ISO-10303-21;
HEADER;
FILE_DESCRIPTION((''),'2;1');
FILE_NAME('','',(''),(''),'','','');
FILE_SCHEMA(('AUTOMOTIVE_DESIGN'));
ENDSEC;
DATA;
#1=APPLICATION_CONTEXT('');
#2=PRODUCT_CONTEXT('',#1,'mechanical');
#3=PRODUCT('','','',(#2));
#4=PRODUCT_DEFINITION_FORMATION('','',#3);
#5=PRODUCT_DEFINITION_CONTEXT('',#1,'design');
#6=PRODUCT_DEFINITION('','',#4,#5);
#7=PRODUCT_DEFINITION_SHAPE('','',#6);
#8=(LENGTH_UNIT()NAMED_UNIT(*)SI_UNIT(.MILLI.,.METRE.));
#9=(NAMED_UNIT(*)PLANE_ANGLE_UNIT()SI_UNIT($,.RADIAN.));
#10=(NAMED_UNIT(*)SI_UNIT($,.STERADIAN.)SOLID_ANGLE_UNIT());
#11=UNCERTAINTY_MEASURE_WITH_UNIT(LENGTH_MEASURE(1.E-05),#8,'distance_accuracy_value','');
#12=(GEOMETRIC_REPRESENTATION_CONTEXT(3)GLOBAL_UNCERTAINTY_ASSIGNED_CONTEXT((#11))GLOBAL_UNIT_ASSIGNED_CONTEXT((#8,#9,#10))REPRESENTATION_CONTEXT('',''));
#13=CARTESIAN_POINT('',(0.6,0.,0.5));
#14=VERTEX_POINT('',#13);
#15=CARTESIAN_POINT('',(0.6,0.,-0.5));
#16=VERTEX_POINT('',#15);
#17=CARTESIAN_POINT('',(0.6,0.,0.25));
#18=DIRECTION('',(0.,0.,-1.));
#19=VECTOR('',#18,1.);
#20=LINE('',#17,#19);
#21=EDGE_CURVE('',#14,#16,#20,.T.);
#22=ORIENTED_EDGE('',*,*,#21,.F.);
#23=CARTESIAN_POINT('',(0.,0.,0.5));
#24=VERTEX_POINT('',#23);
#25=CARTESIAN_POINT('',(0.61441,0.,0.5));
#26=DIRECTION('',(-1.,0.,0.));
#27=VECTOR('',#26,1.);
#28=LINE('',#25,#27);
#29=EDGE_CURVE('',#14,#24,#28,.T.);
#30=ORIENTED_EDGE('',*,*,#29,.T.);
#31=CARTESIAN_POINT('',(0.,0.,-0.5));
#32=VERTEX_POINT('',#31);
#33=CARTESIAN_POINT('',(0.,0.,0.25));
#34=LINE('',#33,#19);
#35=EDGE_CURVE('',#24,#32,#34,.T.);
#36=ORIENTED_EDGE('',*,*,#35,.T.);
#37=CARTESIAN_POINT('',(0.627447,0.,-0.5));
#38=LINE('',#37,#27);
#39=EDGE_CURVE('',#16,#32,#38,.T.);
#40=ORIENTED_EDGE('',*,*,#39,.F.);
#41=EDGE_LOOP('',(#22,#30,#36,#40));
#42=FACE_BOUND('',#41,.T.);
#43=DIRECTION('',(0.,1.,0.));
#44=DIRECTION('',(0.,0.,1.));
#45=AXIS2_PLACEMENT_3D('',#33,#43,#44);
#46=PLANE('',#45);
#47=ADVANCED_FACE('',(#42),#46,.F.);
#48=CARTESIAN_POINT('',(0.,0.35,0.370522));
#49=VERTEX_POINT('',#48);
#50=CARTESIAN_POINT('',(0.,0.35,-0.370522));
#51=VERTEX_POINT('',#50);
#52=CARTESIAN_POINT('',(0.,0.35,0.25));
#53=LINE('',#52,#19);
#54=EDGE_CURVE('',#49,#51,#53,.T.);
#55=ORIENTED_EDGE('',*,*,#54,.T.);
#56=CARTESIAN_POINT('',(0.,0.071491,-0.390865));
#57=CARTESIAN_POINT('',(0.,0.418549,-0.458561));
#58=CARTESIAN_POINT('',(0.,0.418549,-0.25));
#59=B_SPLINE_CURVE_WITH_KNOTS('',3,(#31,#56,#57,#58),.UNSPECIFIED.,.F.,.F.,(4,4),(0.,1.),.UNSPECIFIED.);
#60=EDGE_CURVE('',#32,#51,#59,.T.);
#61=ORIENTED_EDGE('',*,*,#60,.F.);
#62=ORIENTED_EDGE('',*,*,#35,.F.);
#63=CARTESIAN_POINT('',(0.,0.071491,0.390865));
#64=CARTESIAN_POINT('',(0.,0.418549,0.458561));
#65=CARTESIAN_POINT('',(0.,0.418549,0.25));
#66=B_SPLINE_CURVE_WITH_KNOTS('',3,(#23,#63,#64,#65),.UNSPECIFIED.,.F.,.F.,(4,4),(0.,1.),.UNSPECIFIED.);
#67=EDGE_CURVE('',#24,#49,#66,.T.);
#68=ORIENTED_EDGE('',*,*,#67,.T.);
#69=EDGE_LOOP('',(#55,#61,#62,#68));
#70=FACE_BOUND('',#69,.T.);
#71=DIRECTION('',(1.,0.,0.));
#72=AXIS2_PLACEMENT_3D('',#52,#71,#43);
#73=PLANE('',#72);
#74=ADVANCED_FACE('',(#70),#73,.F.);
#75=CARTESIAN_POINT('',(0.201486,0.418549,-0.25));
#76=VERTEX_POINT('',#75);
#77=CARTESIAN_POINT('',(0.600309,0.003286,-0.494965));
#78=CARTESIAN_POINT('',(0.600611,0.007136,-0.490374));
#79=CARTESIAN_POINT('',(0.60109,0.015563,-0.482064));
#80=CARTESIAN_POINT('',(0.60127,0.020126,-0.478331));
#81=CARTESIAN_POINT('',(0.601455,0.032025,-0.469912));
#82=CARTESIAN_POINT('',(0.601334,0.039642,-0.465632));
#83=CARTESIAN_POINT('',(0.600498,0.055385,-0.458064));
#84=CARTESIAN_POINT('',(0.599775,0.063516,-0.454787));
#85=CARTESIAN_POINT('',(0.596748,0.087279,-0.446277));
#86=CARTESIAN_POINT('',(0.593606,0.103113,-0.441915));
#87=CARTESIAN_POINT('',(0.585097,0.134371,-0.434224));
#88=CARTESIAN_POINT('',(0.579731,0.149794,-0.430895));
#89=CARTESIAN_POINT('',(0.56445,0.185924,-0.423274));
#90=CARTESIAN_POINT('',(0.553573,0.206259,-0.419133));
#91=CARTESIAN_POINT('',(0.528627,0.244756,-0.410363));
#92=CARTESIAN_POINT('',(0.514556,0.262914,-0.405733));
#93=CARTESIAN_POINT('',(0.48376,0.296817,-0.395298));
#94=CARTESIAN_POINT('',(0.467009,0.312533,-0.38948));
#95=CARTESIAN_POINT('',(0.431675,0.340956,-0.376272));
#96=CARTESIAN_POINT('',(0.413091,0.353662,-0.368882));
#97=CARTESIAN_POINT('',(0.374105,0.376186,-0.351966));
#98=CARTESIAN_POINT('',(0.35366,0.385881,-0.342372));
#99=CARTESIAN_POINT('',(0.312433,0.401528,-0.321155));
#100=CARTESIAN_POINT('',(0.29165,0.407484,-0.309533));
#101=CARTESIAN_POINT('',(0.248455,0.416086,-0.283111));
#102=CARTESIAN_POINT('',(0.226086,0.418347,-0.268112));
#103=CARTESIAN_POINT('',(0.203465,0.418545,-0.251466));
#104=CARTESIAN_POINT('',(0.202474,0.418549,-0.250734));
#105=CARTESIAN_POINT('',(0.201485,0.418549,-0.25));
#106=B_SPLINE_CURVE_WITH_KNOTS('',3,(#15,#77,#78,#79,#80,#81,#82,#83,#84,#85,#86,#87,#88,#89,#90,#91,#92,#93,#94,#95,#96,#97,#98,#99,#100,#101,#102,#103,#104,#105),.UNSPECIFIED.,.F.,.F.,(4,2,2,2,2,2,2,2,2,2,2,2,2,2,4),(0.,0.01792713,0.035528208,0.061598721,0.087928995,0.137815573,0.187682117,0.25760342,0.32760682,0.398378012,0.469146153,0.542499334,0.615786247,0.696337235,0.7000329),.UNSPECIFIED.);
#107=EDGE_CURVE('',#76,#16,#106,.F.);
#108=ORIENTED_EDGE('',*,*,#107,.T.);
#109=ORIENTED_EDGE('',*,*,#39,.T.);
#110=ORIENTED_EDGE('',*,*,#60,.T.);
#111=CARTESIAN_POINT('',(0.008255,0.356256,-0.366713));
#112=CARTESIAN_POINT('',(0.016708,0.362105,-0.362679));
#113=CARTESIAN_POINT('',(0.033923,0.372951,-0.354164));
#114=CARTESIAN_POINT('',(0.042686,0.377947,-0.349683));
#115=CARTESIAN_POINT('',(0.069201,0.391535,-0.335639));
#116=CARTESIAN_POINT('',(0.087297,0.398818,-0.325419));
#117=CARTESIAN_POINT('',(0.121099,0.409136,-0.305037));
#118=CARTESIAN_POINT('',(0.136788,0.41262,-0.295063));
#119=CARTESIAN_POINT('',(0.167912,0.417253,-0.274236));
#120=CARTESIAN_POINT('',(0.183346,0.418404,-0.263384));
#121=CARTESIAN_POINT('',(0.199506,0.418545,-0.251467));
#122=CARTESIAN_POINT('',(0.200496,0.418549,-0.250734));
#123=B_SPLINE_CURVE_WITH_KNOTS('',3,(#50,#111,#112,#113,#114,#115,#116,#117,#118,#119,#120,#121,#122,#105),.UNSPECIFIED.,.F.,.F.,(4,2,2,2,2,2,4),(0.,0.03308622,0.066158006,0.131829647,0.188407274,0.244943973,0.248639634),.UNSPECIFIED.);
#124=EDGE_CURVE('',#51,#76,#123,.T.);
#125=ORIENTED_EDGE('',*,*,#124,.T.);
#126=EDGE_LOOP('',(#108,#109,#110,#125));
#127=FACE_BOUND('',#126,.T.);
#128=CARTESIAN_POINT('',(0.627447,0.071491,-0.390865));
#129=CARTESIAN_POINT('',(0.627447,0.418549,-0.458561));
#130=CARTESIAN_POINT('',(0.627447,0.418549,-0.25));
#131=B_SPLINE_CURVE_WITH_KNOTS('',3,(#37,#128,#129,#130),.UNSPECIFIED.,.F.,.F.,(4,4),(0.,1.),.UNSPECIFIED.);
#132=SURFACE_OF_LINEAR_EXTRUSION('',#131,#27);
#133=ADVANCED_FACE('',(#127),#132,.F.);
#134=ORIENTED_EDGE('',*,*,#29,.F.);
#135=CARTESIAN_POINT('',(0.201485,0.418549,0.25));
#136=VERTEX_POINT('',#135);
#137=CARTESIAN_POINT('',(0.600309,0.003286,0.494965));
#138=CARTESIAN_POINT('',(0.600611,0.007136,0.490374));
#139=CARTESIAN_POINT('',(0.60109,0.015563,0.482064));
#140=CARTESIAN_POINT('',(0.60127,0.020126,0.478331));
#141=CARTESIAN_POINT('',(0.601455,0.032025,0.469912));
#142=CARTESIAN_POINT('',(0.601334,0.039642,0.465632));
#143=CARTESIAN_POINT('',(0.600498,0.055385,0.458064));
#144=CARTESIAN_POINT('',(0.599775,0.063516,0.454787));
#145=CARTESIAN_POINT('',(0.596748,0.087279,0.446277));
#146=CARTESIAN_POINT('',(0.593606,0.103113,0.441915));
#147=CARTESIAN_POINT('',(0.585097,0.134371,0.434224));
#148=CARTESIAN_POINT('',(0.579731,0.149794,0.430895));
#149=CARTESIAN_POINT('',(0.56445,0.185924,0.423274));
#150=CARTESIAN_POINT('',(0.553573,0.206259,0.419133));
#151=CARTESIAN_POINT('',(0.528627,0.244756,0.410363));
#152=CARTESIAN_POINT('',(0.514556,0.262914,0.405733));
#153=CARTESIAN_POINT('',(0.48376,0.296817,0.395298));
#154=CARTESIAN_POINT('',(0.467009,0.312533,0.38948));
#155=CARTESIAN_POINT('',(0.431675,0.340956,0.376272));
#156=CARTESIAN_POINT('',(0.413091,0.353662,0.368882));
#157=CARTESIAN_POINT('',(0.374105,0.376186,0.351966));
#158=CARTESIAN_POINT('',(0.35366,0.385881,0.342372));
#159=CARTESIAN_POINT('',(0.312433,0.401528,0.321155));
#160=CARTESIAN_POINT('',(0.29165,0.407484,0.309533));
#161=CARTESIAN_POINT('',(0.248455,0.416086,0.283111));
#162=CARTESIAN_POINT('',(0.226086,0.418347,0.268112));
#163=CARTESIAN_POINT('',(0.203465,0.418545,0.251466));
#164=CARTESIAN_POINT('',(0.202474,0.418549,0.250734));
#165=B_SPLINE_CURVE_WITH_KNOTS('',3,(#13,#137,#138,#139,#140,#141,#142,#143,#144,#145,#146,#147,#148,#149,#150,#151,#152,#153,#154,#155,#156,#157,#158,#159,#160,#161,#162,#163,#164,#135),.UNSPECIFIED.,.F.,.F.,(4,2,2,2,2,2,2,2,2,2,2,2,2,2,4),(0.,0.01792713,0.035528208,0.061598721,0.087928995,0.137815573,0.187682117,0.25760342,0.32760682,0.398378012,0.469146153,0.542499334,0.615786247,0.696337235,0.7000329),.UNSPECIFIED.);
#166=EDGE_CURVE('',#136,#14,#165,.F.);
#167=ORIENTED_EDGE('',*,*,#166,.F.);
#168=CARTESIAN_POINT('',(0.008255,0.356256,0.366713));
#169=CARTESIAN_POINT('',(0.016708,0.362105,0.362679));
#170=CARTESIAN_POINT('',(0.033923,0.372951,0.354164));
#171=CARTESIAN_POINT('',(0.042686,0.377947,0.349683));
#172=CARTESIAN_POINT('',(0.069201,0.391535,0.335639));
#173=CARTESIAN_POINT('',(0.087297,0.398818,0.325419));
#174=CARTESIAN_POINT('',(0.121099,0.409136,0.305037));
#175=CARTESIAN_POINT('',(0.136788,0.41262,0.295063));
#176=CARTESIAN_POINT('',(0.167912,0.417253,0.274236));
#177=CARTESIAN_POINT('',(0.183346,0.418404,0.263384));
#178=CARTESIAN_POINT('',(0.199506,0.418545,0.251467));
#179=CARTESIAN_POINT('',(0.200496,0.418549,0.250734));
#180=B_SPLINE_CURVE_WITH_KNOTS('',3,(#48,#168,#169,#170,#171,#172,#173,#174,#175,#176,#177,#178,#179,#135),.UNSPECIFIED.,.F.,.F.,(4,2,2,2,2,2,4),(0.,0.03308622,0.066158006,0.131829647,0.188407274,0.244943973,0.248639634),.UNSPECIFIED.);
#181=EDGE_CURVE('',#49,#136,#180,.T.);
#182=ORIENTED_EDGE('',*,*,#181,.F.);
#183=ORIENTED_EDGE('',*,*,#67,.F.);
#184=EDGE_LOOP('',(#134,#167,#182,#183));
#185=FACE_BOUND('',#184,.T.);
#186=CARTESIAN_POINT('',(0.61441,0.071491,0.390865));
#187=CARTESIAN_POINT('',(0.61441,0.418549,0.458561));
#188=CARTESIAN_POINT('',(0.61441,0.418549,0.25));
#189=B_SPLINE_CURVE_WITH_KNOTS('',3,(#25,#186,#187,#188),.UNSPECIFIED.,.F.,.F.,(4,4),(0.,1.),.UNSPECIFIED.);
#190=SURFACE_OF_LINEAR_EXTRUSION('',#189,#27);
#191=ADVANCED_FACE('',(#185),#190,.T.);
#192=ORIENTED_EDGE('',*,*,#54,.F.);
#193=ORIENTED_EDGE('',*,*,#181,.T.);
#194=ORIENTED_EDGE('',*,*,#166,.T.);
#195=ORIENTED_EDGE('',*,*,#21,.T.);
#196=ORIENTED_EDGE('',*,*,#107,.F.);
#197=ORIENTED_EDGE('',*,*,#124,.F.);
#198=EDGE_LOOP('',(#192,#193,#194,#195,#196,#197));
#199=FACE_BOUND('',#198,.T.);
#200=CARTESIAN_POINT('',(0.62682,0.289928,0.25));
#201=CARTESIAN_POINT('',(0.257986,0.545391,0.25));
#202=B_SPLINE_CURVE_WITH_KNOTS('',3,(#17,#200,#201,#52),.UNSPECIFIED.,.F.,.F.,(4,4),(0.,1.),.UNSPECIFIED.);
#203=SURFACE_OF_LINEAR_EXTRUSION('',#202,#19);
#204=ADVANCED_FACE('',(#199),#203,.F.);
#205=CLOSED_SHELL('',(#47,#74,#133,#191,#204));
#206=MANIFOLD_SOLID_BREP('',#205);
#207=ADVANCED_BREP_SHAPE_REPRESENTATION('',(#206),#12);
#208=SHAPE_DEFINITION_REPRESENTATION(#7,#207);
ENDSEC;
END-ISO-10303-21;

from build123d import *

# Parameters (mm, degrees)
BOSS_EXTRUDE1_DEPTH     = 0.25
BOSS_EXTRUDE2_START     = -0.246147001
BOSS_EXTRUDE2_DEPTH     = 0.246147001
BOSS_EXTRUDE2_START_2   = 0.246147001
BOSS_EXTRUDE2_2_DEPTH   = 0.355236273
BOSS_EXTRUDE2_START_3   = 0.25
BOSS_EXTRUDE2_3_DEPTH   = 1.75
CUT_EXTRUDE1_DEPTH      = 1.887043447
CUT_EXTRUDE1_DEPTH_BACK = 1.887043447


with BuildPart() as part:
    # Sketch1 → Boss-Extrude1 (new, symmetric)
    with BuildSketch(Plane.XY):
        with BuildLine():
            Line((0, 0.35), (0, 0))
            Line((0, 0), (0.6, 0))
            add(Edge.make_bspline(
                [(0, 0.35), (0.257985516, 0.5453908), (0.626819788, 0.289928398), (0.6, 0)],
                knots=[0, 0, 0, 0, 1, 1, 1, 1], degree=3))
        make_face()
    extrude(amount=BOSS_EXTRUDE1_DEPTH, both=True)

    # Boss-Extrude2: read off the stored shape, not the designer's step
    # Boss-Extrude2 outline → Boss-Extrude2 (add)
    with BuildSketch(Plane.ZY.offset(BOSS_EXTRUDE2_START)):
        with BuildLine():
            Line((0.25, 0), (0.5, 0))
            add(Edge.make_bspline(
                [(0.5, 0), (0.39086499, 0.071490544), (0.458561007, 0.418548902), (0.25, 0.418548902)],
                knots=[0, 0, 0, 0, 1, 1, 1, 1], degree=3))
            Line((0.25, 0.418548902), (0.25, 0))
        make_face()
    boss_extrude2 = extrude(amount=BOSS_EXTRUDE2_DEPTH)

    # Boss-Extrude2 2 outline → Boss-Extrude2 2 (add)
    with BuildSketch(Plane.YZ.offset(BOSS_EXTRUDE2_START_2)):
        with BuildLine():
            add(Edge.make_bspline(
                [(0, 0.5), (0.071490544, 0.39086499), (0.418548902, 0.458561007), (0.418548902, 0.25)],
                knots=[0, 0, 0, 0, 1, 1, 1, 1], degree=3))
            Line((0, 0.5), (0, 0.25))
            Line((0, 0.25), (0.418548902, 0.25))
        make_face()
    boss_extrude2_2 = extrude(amount=BOSS_EXTRUDE2_2_DEPTH)

    # Boss-Extrude2 3 outline → Boss-Extrude2 3 (cut)
    with BuildSketch(Plane.XY.offset(BOSS_EXTRUDE2_START_3)):
        with BuildLine():
            Line((0.601383274, 0.418548902), (0.201485184, 0.418548902))
            add(Edge.make_bspline(
                [(0.201485184, 0.418548902), (0.404568721, 0.4185489), (0.600980368, 0.237363776), (0.601383274, 0.030644082)],
                knots=[0.70274, 0.70274, 0.70274, 0.70274, 1.423102498, 1.423102498, 1.423102498, 1.423102498], degree=3))
            Line((0.601383274, 0.030644082), (0.601383274, 0.418548902))
        make_face()
        with BuildLine():
            Line((0.601383274, 0), (0.601383274, 0.029369833))
            add(Edge.make_bspline(
                [(0.6, 0), (0.600909788, 0.009835023), (0.601364288, 0.019630385), (0.601383274, 0.029369833)],
                knots=[0, 0, 0, 0, 0.033922248, 0.033922248, 0.033922248, 0.033922248], degree=3))
            Line((0.6, 0), (0.601383274, 0))
        make_face()
    boss_extrude2_3 = extrude(amount=BOSS_EXTRUDE2_3_DEPTH, mode=Mode.SUBTRACT)

    # Mirror1: Boss-Extrude2, Boss-Extrude2 2, Boss-Extrude2 3 across plane
    add(boss_extrude2.mirror(Plane.XY))
    add(boss_extrude2_2.mirror(Plane.XY))
    add(boss_extrude2_3.mirror(Plane.XY), mode=Mode.SUBTRACT)

    # Sketch3 → Cut-Extrude1 (cut, two sides: drawn at the far end of the back side and taken through both)
    with BuildSketch(Plane.XY.offset(-CUT_EXTRUDE1_DEPTH_BACK)):
        with BuildLine():
            Line((0, 0.418548902), (0, 0.35))
            add(Edge.make_bspline(
                [(0.201485181, 0.418548902), (0.132630672, 0.418548902), (0.063009218, 0.397721367), (0, 0.35)],
                knots=[0.755764514, 0.755764514, 0.755764514, 0.755764514, 1, 1, 1, 1], degree=3))
            Line((0.201485181, 0.418548902), (0, 0.418548902))
        make_face()
    extrude(amount=CUT_EXTRUDE1_DEPTH + CUT_EXTRUDE1_DEPTH_BACK, mode=Mode.SUBTRACT)


solid = part.part
